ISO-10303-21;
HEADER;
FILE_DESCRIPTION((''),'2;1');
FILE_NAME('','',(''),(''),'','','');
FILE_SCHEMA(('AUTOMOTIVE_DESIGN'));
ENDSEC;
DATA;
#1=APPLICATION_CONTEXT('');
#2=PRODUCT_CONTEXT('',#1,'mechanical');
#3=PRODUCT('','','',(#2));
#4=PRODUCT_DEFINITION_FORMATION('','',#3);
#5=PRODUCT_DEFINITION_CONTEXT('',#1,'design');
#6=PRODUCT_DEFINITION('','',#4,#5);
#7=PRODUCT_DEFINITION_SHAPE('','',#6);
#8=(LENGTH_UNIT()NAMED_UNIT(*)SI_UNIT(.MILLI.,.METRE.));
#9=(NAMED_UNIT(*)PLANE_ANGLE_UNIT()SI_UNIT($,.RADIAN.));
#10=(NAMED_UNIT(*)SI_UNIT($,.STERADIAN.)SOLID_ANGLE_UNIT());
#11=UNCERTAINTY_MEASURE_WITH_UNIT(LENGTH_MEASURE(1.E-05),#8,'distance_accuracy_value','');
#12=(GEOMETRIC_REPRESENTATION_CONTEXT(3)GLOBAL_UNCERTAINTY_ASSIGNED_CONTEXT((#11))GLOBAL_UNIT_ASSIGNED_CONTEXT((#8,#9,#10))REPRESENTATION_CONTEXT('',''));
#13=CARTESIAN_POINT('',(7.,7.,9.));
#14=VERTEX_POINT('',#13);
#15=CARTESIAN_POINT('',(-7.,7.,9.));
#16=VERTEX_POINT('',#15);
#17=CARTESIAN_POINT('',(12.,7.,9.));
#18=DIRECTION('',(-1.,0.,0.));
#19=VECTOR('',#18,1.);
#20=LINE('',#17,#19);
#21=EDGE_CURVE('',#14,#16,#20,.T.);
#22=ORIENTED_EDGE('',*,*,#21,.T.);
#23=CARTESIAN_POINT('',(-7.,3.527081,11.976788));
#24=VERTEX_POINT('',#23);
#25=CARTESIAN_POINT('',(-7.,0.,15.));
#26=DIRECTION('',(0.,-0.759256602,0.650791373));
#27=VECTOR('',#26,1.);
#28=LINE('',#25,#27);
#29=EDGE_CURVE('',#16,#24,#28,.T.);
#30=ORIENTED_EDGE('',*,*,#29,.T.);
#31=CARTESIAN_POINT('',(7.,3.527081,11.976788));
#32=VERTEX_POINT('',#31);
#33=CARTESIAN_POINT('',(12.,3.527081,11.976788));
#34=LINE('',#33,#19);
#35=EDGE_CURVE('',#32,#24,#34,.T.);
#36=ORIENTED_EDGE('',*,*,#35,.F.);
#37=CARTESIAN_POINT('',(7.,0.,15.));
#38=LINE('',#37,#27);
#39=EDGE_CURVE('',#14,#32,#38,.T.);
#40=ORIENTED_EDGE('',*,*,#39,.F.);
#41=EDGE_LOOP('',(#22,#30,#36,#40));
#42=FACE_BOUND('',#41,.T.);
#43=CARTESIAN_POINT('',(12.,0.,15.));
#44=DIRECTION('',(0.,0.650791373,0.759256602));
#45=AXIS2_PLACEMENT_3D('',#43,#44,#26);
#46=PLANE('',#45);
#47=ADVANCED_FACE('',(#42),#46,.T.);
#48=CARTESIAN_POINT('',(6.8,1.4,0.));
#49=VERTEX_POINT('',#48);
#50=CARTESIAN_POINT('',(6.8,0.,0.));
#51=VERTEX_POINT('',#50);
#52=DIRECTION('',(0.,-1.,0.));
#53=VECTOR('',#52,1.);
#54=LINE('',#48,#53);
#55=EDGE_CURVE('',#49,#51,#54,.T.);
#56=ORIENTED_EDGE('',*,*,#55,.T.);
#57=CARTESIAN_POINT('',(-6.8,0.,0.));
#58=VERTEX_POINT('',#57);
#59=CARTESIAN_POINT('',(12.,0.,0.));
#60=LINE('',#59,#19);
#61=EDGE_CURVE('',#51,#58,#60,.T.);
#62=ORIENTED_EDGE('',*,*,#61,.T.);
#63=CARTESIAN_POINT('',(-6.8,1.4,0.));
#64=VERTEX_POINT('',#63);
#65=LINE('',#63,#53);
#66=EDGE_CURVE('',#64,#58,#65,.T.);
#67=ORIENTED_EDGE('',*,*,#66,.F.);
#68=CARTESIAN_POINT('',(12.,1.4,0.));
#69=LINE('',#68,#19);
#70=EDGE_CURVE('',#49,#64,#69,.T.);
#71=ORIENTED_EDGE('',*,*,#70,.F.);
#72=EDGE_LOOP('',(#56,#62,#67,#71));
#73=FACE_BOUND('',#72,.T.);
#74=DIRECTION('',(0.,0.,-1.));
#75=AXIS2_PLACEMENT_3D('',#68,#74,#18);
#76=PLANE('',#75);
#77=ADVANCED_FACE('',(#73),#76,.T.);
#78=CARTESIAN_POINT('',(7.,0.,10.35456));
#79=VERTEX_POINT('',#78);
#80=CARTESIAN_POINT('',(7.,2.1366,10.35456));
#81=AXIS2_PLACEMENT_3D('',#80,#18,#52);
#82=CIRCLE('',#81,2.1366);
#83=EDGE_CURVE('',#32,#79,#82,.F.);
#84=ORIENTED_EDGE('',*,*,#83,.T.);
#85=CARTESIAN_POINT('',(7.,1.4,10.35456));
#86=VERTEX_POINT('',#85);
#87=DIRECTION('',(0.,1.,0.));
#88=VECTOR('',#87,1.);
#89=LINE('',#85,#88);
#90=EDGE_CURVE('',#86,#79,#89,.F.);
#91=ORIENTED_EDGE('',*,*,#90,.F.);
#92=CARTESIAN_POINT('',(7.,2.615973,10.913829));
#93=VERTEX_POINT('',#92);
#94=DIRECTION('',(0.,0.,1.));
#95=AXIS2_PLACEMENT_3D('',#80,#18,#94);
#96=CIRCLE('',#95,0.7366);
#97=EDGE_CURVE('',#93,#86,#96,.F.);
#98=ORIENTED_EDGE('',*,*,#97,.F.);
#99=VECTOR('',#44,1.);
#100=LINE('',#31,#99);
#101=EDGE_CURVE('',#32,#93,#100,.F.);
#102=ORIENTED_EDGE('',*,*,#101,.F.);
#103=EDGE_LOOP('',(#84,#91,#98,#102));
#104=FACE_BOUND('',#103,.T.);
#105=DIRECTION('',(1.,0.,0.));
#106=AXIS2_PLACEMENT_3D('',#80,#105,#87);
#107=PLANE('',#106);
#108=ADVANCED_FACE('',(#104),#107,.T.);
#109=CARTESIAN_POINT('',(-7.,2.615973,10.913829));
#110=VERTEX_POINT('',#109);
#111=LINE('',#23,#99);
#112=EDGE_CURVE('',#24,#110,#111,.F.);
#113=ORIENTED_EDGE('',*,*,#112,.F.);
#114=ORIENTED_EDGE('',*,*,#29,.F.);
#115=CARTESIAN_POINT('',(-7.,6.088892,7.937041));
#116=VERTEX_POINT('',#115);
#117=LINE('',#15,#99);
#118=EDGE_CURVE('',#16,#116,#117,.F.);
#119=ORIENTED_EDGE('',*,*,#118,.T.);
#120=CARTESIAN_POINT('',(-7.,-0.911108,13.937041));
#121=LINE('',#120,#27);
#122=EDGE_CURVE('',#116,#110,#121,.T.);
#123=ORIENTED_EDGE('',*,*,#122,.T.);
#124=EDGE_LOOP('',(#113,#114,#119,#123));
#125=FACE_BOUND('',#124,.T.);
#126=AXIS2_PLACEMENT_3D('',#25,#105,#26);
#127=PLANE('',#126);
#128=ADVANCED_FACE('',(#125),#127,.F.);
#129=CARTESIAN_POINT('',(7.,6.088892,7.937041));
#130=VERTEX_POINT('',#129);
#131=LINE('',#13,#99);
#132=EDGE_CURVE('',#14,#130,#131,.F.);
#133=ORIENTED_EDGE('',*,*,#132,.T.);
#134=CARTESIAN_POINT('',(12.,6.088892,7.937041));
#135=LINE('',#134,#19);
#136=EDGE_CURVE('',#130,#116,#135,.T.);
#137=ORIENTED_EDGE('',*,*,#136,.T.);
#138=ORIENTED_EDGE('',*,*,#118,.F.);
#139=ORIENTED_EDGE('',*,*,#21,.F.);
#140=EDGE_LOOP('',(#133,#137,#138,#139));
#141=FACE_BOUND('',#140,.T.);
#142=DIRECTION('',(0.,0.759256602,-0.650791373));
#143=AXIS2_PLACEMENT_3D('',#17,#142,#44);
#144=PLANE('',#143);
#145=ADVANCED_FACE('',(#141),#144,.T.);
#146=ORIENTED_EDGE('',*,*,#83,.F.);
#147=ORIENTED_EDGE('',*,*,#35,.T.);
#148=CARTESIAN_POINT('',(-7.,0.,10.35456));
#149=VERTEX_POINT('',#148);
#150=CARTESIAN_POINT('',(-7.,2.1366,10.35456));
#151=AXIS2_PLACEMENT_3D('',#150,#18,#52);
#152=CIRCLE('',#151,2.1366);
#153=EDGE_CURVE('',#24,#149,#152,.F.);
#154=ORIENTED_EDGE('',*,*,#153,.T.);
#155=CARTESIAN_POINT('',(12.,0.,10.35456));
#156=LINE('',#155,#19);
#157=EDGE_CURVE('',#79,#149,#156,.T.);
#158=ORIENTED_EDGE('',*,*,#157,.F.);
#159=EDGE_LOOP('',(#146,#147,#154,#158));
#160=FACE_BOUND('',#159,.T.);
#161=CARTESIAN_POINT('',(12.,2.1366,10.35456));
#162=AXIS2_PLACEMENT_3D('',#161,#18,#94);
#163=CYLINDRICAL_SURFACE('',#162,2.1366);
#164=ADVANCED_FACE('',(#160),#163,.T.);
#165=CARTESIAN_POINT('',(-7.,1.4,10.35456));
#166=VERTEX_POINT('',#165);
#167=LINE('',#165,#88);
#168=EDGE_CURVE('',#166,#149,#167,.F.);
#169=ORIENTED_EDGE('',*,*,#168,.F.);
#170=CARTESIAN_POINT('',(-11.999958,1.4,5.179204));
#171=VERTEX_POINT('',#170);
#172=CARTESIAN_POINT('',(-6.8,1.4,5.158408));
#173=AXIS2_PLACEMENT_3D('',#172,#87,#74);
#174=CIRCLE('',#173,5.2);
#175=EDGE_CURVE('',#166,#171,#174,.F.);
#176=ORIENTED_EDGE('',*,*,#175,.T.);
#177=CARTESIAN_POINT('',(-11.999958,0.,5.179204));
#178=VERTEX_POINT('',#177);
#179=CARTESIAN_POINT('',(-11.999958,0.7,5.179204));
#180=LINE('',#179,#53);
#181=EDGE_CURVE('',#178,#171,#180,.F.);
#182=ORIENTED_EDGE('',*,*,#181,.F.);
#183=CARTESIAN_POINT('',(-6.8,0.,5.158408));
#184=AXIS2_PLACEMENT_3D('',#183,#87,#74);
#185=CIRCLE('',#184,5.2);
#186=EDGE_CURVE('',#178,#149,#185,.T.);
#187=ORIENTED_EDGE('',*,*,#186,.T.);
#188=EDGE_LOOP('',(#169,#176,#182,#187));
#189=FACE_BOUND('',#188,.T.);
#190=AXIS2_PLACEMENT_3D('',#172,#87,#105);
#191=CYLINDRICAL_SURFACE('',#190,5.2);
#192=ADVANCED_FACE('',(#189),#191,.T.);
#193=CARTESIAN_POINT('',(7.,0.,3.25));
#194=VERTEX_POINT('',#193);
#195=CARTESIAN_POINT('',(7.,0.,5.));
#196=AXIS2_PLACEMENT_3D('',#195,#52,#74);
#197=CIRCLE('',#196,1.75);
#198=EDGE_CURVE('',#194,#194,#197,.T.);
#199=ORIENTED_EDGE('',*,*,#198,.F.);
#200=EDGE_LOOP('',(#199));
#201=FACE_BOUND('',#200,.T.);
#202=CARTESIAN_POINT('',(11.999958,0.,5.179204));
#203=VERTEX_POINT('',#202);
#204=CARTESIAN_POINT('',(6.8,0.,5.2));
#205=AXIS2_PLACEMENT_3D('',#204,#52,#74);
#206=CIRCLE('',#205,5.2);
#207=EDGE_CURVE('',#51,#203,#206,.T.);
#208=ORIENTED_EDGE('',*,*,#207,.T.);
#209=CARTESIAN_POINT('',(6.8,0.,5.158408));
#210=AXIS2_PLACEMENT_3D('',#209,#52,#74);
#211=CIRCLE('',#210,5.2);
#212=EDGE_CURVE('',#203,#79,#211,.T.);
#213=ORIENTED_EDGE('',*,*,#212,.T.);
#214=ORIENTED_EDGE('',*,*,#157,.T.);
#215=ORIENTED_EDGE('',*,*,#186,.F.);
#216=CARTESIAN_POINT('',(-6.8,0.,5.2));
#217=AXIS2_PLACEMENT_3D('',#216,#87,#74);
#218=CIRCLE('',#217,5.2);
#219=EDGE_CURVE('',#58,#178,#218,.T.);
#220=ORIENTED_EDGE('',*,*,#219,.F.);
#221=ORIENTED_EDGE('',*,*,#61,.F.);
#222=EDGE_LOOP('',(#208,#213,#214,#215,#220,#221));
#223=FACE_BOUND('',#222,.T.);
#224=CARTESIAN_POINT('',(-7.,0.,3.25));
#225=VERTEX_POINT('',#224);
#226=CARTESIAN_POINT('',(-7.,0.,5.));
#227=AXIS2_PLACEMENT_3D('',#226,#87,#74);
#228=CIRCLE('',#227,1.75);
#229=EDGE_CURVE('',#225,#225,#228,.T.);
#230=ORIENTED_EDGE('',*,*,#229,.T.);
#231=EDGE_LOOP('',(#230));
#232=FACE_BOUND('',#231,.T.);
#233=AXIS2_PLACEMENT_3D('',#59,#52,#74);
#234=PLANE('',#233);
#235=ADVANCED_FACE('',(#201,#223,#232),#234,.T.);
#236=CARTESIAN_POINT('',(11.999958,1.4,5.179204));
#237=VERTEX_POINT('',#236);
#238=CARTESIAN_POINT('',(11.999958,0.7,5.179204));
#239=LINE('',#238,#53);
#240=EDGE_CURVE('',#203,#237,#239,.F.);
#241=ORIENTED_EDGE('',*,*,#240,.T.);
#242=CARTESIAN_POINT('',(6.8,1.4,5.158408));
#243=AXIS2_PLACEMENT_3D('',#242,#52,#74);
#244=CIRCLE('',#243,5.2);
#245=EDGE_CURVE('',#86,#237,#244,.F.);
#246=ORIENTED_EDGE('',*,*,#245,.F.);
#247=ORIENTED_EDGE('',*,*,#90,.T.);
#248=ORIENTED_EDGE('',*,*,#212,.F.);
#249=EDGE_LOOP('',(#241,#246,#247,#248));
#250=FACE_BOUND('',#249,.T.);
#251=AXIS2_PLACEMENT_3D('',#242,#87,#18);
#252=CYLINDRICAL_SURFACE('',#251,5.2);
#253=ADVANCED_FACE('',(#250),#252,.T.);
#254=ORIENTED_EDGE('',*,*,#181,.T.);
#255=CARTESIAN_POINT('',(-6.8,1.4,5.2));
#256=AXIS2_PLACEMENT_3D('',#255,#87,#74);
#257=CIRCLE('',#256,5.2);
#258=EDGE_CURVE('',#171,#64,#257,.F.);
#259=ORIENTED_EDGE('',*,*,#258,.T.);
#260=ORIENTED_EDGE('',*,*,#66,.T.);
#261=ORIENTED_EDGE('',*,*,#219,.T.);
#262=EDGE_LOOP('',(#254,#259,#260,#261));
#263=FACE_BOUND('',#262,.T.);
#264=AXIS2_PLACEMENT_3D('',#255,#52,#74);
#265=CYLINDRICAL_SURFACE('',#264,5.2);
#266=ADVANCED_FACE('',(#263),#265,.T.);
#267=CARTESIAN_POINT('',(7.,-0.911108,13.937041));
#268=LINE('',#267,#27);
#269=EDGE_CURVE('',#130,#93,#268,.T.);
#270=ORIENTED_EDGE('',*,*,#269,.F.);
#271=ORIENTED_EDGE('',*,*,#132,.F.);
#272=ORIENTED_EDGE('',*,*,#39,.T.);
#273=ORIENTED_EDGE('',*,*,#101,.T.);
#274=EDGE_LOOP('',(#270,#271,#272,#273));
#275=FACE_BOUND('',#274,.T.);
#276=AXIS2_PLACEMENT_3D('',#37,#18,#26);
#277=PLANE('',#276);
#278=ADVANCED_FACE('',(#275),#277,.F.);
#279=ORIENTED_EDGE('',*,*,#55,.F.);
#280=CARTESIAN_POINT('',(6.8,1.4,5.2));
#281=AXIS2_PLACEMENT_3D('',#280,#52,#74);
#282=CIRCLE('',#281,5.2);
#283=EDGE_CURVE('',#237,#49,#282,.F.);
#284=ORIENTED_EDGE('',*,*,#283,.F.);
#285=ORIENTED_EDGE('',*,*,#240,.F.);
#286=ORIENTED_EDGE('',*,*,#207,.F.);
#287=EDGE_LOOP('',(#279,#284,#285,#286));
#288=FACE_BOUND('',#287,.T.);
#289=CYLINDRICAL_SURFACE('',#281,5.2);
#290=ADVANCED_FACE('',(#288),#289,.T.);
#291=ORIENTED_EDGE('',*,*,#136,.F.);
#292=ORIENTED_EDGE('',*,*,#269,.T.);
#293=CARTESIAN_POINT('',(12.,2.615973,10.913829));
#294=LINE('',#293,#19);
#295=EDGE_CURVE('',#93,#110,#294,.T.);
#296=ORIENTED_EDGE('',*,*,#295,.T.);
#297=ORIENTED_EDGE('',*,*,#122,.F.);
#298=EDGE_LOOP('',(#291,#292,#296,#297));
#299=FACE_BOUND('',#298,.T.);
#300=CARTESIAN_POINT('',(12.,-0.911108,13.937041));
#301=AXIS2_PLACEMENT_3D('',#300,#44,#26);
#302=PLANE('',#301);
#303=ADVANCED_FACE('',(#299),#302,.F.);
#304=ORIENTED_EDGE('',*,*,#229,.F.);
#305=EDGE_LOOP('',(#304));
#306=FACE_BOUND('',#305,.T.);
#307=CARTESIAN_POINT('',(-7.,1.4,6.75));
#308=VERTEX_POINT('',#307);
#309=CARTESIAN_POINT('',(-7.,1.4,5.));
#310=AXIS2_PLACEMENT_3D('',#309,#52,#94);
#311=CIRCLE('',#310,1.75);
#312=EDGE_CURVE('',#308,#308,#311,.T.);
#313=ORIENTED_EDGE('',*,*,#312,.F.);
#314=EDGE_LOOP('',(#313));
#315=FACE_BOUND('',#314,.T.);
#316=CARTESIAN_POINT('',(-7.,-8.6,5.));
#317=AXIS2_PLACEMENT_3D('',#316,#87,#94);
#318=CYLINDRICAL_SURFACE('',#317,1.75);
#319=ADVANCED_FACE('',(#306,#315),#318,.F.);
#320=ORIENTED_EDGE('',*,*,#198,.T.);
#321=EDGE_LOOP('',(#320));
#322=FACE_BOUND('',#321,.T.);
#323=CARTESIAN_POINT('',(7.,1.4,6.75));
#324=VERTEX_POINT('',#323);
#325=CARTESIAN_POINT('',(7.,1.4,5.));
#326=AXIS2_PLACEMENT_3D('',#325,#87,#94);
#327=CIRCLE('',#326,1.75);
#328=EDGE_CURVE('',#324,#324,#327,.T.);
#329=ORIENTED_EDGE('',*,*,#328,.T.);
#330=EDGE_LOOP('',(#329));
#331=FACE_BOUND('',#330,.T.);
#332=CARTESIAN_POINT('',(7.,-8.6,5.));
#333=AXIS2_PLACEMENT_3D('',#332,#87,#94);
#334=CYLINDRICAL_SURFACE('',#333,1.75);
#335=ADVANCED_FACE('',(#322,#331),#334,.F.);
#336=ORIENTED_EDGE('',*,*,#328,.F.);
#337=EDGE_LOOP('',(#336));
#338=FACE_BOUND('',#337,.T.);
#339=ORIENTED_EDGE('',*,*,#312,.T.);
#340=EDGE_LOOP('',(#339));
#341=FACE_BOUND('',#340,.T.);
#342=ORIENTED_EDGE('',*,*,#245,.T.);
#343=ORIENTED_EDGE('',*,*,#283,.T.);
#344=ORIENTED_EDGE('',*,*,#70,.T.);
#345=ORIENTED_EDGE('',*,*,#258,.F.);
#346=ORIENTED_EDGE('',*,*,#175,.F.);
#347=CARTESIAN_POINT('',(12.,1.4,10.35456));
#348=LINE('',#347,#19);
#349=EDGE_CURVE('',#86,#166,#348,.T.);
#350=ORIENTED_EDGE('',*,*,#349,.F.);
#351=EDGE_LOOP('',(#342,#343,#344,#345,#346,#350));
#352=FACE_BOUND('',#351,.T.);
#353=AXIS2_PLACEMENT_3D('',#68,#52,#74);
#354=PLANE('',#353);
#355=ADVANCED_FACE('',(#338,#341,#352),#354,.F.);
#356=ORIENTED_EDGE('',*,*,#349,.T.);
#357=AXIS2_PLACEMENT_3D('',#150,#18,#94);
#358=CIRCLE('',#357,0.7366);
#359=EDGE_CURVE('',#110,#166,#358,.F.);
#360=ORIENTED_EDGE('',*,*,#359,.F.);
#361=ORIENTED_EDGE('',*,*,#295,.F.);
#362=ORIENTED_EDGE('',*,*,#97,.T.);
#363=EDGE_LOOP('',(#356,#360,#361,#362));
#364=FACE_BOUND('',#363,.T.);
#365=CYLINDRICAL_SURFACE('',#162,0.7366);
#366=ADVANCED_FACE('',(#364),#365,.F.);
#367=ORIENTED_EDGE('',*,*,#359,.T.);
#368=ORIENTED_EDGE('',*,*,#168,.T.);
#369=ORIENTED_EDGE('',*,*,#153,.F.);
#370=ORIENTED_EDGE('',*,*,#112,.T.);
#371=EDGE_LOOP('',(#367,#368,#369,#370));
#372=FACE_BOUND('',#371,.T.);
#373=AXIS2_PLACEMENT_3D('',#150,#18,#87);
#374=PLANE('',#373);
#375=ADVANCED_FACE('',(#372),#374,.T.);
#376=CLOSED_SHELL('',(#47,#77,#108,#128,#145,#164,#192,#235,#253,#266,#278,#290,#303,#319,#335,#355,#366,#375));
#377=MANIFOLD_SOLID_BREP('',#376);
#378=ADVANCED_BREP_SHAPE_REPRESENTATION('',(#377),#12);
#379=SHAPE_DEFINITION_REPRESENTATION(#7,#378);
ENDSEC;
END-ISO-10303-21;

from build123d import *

# Parameters (mm, degrees)
T_LE_DE_BASE_PLI_E1_DEPTH = 12
ENL_V_START               = 7
ENL_V_MAT_EXTRU_1_DEPTH   = 5
ESQUISSE7_R               = 1.75
ENL_V_MAT_EXTRU_2_DEPTH   = 10
CONG_1_R                  = 5.2


# Read off the part's stored shape, not the designer's step: Enlèv. mat.-Extru.1
# Sheet-metal steps are written as plain solids
with BuildPart() as part:
    # Esquisse1 → Tôle de base pliée1 (new body)
    with BuildSketch(Plane(origin=(0, 0, 0), x_dir=(0, 0, -1), z_dir=(1, 0, 0))):
        with BuildLine():
            Line((0, 0), (-10.354560188, 0))
            ThreePointArc((-10.354560188, 0), (-12.295688846, 1.243807141), (-11.976787844, 3.527080849))
            Line((-11.976787844, 3.527080849), (-9, 7))
            Line((-9, 7), (-7.937040757, 6.088892077))
            Line((-7.937040757, 6.088892077), (-10.913828601, 2.615972926))
            ThreePointArc((-10.913828601, 2.615972926), (-11.023770789, 1.828806674), (-10.354560188, 1.4))
            Line((-10.354560188, 1.4), (0, 1.4))
            Line((0, 1.4), (0, 0))
        make_face()
    extrude(amount=T_LE_DE_BASE_PLI_E1_DEPTH)

    # Enlèv. mat.-Extru.1 outline → Enlèv. mat.-Extru.1 (cut)
    with BuildSketch(Plane.YZ.offset(ENL_V_START)):
        with BuildLine():
            Line((0, 10.354560188), (1.4, 10.354560188))
            ThreePointArc((1.4, 10.354560188), (1.828806674, 11.023770789), (2.615972926, 10.913828601))
            Line((2.615972926, 10.913828601), (6.088892077, 7.937040757))
            Line((6.088892077, 7.937040757), (7, 9))
            Line((7, 9), (3.527080849, 11.976787844))
            ThreePointArc((3.527080849, 11.976787844), (1.243807141, 12.295688846), (0, 10.354560188))
        make_face()
    extrude(amount=ENL_V_MAT_EXTRU_1_DEPTH, mode=Mode.SUBTRACT)

    # Esquisse7 → Enlèv. mat.-Extru.2 (cut)
    with BuildSketch(Plane(origin=(0, 1.4, 0), x_dir=(1, 0, 0), z_dir=(0, 1, 0))):
        with Locations(Location((7, -5, 0), (0, 0, 270))):
            Circle(ESQUISSE7_R)
    extrude(amount=-ENL_V_MAT_EXTRU_2_DEPTH, mode=Mode.SUBTRACT)

    # Congé1
    # the kernel refuses this fillet: 5.2 mm, written as the material it takes off along each edge
    with BuildSketch(Plane(origin=(12, -12.990381057, 10.354560188), x_dir=(-1, 0, 0), z_dir=(0, 1, 0))) as cong_1_piece_1:
        with BuildLine():
            CenterArc((5.2, -5.196152423), CONG_1_R, 92.204227504, 87.795772496)
            Line((0, -5.196152423), (-0.104, -5.196152423))
            Line((-0.104, -5.196152423), (-0.104, 0))
            Line((-0.104, 0), (0, 0.104))
            ThreePointArc((0, 0.104), (2.5, 0.104), (4.996, 0.103923048))
            Line((4.996, 0.103923048), (5, 0))
        make_face()
    extrude(amount=27.380762114, mode=Mode.SUBTRACT)
    with BuildSketch(Plane(origin=(12, 14.4, 0), x_dir=(-1, 0, 0), z_dir=(0, -1, 0))) as cong_1_piece_2:
        with BuildLine():
            CenterArc((CONG_1_R, -CONG_1_R), CONG_1_R, 90, 90)
            Line((0, -CONG_1_R), (-CONG_1_R * 0.02, -CONG_1_R))
            Line((-CONG_1_R * 0.02, -CONG_1_R), (-CONG_1_R * 0.02, CONG_1_R * 0.02))
            Line((-CONG_1_R * 0.02, CONG_1_R * 0.02), (CONG_1_R, CONG_1_R * 0.02))
            Line((CONG_1_R, CONG_1_R * 0.02), (CONG_1_R, 0))
        make_face()
    extrude(amount=27.4, mode=Mode.SUBTRACT)

    # Symétrie1: part across plane


with BuildPart() as part_1:
    add(part.part)
    add(part.part.mirror(Plane(origin=(0, 2.615972926, 10.913828601), x_dir=(0, 0, 1), z_dir=(-1, 0, 0))))


solid = part_1.part
